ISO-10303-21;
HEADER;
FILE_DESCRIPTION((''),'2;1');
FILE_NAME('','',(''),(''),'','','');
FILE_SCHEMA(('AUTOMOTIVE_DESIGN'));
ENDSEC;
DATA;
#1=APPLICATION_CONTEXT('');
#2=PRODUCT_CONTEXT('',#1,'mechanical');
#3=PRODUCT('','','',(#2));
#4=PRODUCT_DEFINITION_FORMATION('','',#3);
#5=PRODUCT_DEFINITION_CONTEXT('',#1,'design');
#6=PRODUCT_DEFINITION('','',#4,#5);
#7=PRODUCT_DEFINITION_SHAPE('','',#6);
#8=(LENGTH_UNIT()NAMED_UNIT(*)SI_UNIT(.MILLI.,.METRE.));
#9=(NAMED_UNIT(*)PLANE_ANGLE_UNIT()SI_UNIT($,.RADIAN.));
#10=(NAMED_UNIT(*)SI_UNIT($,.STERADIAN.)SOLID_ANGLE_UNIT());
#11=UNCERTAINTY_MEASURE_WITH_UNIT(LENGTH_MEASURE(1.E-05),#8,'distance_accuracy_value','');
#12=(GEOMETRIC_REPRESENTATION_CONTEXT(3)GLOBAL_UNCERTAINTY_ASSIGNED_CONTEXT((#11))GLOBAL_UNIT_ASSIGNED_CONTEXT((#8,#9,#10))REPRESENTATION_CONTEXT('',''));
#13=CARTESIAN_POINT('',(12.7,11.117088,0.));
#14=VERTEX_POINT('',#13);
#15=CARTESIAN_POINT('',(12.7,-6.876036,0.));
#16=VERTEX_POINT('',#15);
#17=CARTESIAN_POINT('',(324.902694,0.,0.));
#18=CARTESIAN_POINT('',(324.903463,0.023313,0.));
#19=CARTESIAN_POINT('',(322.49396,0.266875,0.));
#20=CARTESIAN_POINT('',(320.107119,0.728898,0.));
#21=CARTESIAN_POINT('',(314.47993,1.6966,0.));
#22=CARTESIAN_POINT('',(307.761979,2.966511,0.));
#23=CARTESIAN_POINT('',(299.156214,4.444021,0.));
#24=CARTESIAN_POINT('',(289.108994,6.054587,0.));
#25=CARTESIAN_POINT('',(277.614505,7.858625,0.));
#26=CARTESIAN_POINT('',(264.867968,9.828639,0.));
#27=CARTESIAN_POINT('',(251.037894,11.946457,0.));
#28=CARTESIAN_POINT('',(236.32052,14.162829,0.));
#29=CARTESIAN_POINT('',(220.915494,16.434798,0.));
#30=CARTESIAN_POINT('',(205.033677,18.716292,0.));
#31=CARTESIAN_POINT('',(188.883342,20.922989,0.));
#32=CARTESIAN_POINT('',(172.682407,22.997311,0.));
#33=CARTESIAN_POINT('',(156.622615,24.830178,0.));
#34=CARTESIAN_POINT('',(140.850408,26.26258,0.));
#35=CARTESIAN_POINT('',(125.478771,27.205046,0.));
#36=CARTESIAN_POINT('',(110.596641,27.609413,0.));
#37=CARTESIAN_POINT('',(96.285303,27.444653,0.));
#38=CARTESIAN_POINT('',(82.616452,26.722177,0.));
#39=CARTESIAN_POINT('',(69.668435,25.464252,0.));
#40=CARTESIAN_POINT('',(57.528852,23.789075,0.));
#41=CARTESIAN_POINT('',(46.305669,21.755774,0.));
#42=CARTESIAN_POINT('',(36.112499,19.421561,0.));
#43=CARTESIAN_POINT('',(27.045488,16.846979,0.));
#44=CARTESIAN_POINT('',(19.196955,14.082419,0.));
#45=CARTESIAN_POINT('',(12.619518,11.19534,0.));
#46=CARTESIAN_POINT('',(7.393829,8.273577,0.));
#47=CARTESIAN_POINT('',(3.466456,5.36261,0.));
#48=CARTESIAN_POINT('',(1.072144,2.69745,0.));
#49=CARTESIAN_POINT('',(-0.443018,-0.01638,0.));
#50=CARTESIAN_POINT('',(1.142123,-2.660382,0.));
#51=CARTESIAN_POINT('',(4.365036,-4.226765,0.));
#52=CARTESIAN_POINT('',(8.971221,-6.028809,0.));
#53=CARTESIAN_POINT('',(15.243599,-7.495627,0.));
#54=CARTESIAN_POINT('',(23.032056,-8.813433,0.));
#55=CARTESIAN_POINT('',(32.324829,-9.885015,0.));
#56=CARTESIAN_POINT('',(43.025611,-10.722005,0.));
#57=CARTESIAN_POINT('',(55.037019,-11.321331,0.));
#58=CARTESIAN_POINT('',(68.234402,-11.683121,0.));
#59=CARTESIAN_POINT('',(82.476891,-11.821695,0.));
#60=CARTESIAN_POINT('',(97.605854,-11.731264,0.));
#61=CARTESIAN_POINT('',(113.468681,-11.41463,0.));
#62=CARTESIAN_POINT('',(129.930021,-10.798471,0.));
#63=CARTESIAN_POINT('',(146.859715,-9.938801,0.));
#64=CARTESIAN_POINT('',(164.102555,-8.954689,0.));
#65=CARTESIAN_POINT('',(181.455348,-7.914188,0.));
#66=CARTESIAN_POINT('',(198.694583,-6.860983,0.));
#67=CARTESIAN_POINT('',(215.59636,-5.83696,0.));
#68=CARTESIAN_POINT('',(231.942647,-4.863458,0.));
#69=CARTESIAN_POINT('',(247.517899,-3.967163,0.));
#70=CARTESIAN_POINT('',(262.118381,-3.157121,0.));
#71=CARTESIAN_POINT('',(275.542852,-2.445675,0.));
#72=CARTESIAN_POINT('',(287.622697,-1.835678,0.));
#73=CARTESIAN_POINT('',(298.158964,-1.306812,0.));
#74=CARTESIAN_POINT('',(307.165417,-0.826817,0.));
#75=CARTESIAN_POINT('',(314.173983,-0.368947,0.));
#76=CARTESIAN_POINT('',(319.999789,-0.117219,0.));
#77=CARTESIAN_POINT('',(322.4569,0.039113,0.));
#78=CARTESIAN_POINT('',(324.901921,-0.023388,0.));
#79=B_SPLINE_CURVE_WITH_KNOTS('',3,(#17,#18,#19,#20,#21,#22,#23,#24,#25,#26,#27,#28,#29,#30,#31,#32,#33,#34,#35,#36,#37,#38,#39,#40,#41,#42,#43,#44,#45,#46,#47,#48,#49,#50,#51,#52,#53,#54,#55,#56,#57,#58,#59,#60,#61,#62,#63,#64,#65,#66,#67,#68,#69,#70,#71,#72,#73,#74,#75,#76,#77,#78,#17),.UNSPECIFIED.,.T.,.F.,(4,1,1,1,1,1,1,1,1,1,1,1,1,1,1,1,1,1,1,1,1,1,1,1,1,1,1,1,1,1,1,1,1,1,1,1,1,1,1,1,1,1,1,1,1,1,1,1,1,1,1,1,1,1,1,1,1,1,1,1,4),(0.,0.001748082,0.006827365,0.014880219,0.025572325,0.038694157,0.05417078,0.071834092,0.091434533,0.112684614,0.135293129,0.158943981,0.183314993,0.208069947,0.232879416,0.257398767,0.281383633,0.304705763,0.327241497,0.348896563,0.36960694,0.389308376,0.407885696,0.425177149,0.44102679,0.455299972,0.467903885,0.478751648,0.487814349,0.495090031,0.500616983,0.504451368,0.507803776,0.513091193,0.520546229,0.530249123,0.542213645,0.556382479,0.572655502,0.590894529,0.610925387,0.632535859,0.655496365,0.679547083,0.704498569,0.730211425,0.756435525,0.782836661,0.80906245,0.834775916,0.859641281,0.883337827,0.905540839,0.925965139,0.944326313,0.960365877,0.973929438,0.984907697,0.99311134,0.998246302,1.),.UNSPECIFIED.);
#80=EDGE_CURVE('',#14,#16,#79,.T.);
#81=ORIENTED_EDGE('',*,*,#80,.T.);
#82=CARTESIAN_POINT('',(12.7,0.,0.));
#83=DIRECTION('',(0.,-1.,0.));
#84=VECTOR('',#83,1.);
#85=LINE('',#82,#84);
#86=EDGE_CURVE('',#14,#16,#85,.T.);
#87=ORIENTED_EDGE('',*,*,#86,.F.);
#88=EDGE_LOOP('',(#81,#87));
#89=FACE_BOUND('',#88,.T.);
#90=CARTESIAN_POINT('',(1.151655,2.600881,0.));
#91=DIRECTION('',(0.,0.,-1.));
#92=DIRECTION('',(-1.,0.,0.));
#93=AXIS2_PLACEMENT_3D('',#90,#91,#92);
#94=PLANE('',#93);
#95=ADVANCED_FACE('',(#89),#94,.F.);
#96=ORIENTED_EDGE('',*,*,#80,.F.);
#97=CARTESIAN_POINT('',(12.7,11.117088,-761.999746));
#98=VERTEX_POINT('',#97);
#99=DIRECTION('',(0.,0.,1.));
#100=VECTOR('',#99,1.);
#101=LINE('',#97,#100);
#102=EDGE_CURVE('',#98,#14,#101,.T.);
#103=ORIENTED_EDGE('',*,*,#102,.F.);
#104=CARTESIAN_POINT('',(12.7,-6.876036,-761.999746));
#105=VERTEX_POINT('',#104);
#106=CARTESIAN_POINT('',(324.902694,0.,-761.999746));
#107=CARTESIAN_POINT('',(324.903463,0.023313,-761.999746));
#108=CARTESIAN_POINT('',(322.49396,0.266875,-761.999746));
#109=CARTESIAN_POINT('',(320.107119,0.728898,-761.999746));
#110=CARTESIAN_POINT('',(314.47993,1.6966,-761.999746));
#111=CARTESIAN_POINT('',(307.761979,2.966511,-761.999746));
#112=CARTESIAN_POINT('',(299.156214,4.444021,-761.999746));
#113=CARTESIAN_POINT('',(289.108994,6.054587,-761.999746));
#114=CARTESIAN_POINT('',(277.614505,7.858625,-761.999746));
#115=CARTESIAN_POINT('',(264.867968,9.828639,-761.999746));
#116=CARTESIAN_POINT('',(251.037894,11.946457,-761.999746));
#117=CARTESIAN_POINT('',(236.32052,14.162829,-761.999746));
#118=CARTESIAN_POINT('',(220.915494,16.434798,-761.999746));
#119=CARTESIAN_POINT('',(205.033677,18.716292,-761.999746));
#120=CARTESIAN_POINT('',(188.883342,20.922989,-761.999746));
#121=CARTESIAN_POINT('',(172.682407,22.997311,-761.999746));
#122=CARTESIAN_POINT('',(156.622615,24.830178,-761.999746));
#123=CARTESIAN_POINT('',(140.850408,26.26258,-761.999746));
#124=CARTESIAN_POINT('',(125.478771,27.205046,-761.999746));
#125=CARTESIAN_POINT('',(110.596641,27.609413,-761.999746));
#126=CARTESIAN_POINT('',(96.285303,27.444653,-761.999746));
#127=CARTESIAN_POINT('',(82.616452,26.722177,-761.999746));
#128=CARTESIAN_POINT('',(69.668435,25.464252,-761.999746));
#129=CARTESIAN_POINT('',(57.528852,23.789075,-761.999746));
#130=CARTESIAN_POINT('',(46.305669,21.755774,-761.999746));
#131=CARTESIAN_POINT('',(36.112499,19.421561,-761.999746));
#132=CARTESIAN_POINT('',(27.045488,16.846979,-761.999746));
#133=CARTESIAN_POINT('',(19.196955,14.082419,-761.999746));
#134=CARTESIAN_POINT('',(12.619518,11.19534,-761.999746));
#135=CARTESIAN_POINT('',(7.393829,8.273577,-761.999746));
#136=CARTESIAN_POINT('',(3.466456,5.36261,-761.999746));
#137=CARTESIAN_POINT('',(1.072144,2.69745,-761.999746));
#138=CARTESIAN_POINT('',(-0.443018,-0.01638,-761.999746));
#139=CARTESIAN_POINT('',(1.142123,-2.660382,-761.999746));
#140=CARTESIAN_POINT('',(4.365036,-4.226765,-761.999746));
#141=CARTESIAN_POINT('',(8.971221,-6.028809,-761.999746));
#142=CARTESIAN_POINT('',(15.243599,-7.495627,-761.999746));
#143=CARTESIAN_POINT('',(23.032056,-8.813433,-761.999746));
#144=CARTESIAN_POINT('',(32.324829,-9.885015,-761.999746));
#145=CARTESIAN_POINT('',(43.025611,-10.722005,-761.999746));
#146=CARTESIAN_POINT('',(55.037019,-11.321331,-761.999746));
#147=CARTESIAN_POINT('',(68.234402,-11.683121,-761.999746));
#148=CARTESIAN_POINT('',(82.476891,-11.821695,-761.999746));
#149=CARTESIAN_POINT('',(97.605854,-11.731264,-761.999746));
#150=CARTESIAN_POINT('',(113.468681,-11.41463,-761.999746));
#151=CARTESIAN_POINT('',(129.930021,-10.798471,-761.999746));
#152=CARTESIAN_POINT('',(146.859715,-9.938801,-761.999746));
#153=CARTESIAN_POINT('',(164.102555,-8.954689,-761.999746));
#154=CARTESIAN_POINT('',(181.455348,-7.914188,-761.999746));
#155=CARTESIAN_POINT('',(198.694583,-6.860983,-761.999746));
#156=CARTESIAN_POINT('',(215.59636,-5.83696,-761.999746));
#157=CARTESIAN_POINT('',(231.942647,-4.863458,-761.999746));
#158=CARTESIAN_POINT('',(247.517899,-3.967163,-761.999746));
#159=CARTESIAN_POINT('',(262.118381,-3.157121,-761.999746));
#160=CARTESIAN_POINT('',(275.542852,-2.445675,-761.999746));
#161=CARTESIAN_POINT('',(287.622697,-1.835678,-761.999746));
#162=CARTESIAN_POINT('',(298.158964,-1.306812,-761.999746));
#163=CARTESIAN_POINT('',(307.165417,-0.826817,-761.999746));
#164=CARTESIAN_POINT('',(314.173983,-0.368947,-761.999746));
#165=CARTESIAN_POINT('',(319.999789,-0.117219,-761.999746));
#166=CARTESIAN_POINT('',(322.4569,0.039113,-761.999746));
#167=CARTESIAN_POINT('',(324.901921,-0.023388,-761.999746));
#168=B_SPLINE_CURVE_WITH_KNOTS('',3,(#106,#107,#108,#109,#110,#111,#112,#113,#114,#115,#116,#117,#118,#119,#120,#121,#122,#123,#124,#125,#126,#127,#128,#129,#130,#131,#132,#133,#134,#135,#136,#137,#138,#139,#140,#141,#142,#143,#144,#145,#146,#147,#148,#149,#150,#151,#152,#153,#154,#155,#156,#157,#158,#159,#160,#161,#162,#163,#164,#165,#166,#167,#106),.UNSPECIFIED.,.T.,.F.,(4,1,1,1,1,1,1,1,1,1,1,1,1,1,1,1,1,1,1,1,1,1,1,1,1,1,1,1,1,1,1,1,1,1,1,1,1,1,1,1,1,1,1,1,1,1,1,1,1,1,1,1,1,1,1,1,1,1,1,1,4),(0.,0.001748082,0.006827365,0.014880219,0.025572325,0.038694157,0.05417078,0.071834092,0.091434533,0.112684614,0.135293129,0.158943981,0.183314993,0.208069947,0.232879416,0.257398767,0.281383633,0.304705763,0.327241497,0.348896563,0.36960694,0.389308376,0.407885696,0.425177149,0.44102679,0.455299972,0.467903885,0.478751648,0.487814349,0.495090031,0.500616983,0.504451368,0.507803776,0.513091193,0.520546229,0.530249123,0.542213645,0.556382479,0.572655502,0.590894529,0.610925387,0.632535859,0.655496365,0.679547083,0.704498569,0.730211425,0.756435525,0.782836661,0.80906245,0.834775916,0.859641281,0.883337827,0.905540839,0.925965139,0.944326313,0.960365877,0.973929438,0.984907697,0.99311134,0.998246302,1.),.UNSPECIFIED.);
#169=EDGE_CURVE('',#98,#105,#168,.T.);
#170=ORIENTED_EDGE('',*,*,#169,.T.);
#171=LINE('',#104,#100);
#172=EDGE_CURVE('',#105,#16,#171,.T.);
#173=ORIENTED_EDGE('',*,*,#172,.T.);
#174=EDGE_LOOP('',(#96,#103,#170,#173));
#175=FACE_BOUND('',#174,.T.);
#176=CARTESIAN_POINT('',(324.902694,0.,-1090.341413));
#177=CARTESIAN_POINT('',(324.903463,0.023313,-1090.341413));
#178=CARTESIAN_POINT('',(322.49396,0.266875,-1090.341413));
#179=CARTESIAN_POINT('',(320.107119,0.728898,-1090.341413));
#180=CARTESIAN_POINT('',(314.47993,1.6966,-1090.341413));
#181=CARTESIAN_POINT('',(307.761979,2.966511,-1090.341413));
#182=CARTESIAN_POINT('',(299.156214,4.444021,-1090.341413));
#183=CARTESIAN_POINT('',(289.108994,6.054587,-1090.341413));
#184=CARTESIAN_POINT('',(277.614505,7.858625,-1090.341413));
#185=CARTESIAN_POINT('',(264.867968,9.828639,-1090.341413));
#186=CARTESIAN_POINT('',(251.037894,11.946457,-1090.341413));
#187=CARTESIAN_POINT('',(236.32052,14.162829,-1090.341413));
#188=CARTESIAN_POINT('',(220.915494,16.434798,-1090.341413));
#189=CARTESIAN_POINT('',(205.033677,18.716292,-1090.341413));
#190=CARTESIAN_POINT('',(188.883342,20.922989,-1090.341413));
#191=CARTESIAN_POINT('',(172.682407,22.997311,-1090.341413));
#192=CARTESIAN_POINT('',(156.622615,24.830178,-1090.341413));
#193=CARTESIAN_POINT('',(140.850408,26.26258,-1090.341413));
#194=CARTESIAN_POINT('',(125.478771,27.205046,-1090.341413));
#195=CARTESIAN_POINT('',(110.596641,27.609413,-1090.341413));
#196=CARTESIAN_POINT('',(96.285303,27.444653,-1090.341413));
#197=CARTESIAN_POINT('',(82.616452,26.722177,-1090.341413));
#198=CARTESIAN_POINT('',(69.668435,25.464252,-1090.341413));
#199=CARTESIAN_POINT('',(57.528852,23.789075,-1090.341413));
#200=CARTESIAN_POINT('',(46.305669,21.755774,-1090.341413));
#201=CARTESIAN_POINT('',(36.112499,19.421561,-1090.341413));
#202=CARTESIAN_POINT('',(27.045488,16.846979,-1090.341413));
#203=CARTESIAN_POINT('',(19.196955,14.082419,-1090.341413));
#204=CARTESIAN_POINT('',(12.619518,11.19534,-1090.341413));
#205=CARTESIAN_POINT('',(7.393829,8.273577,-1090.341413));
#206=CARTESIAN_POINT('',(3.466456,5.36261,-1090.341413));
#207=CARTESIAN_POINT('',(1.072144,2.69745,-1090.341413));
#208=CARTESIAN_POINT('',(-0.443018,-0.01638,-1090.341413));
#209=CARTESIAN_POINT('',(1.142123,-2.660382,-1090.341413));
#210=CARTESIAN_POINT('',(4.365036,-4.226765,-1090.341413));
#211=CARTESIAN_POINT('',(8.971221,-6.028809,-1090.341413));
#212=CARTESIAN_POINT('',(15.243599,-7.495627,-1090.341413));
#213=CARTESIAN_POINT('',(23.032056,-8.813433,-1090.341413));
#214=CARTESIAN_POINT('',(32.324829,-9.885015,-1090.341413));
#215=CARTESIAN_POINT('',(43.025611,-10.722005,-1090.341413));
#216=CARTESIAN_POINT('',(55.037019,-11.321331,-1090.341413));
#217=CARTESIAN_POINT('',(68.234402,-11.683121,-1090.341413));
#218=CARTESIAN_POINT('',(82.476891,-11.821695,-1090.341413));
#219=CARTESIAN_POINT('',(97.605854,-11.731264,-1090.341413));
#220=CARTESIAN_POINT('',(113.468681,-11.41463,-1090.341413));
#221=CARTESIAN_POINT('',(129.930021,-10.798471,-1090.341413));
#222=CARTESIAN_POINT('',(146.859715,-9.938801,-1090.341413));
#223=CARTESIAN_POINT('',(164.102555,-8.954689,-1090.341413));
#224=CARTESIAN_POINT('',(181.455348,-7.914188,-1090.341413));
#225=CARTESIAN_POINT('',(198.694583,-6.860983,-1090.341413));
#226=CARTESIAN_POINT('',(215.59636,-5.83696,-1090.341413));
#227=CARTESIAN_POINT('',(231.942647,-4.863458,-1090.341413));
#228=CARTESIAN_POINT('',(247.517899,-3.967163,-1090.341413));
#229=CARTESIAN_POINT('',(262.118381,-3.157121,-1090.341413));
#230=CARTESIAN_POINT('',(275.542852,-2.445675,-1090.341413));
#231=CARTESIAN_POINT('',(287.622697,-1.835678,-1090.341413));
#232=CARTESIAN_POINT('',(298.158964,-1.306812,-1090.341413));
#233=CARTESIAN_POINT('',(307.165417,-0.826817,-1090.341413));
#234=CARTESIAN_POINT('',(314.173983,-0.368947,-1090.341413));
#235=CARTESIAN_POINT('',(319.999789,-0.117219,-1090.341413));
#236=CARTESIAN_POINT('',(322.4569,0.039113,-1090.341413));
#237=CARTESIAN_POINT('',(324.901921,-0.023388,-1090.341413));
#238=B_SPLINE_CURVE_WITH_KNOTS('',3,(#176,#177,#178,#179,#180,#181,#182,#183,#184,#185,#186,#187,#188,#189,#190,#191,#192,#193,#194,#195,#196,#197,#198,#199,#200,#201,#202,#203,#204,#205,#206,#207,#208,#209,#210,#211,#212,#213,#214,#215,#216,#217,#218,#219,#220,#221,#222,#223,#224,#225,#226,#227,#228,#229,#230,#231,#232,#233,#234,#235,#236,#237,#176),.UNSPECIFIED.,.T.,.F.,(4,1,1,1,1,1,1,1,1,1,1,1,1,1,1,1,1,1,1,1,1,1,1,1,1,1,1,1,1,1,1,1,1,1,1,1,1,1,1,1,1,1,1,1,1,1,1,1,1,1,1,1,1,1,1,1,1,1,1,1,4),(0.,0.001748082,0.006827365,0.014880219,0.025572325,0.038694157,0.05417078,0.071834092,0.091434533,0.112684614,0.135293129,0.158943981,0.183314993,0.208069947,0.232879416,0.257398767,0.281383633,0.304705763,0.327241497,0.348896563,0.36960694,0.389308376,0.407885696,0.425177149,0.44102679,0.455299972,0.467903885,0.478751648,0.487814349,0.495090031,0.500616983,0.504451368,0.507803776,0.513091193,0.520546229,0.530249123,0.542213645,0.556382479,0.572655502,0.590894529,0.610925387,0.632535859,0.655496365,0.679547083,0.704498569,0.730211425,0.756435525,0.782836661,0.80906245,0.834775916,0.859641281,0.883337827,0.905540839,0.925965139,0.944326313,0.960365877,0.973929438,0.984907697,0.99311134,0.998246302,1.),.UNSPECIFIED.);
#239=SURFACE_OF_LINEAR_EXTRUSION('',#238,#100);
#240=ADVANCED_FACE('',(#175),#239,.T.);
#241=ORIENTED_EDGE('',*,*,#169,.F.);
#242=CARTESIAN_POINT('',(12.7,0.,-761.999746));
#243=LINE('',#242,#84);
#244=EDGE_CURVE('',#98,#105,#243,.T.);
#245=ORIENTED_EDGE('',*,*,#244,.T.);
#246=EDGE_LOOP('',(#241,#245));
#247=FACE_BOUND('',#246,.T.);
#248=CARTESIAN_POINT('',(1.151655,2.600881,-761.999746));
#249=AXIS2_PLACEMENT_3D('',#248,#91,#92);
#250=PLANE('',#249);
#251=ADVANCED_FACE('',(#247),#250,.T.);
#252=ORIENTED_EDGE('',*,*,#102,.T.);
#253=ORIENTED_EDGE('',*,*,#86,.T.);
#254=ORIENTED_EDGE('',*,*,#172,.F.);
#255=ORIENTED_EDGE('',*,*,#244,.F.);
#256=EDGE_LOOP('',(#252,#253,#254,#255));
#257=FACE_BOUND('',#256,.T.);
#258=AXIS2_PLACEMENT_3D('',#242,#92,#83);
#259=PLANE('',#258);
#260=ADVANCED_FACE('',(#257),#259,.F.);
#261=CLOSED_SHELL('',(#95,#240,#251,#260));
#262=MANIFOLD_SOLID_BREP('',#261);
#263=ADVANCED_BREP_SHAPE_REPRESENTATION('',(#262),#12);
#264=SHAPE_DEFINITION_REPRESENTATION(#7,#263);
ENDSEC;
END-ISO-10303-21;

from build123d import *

# Parameters (mm, degrees)
BOSS_EXTRUDE2_DEPTH = 761.999746
CUT_EXTRUDE1_START  = -761.999746
CUT_EXTRUDE1_DEPTH  = 761.999746


# Read off the part's stored shape, not the designer's step: Cut-Extrude1
with BuildPart() as part:
    # Sketch2 → Boss-Extrude2 (new body)
    with BuildSketch(Plane.XY):
        with BuildLine():
            add(Edge.make_bspline(
                [(324.902693551, 0), (324.903463196, 0.023313358), (322.493960125, 0.266874853), (320.107118726, 0.728898482), (314.479929879, 1.696599545), (307.761979309, 2.966510847), (299.156213966, 4.44402059), (289.108994082, 6.054587212), (277.614504557, 7.858625418), (264.867967682, 9.828639283), (251.037893607, 11.946456865), (236.320520328, 14.162828682), (220.915494029, 16.434797842), (205.033677241, 18.716292105), (188.883341887, 20.922988597), (172.682407247, 22.997310524), (156.622614565, 24.830178487), (140.850407651, 26.262579625), (125.478771128, 27.205045845), (110.596641232, 27.609413226), (96.285303339, 27.444653165), (82.616452357, 26.722177249), (69.668434964, 25.464252485), (57.528852266, 23.789075325), (46.305668853, 21.755773795), (36.112498821, 19.421560607), (27.045487678, 16.846978605), (19.196955025, 14.082419467), (12.619518254, 11.195340149), (7.393829249, 8.273577005), (3.466455599, 5.362609604), (1.07214418, 2.697450283), (-0.443018312, -0.016380309), (1.142123289, -2.660381571), (4.36503606, -4.226764571), (8.971221404, -6.028809419), (15.243598774, -7.49562747), (23.03205608, -8.813433078), (32.324829104, -9.885015211), (43.025610851, -10.722004925), (55.037019029, -11.32133074), (68.234402161, -11.683120574), (82.476890937, -11.821694636), (97.60585357, -11.731263556), (113.468681032, -11.414630367), (129.930020513, -10.79847052), (146.859715047, -9.938801137), (164.102555428, -8.954688629), (181.455347718, -7.914187903), (198.694582839, -6.86098311), (215.596359861, -5.836960409), (231.942646987, -4.863457625), (247.517899408, -3.967162621), (262.118380872, -3.157120583), (275.542852028, -2.445675428), (287.622696903, -1.835678138), (298.158964313, -1.306811978), (307.16541669, -0.826816664), (314.173983408, -0.368946975), (319.99978897, -0.117218531), (322.45689994, 0.039112512), (324.901921434, -0.023388259), (324.902693551, 0)],
                knots=[0, 0, 0, 0, 0.001748082, 0.006827365, 0.014880219, 0.025572325, 0.038694157, 0.05417078, 0.071834092, 0.091434533, 0.112684614, 0.135293129, 0.158943981, 0.183314993, 0.208069947, 0.232879416, 0.257398767, 0.281383633, 0.304705763, 0.327241497, 0.348896563, 0.36960694, 0.389308376, 0.407885696, 0.425177149, 0.44102679, 0.455299972, 0.467903885, 0.478751648, 0.487814349, 0.495090031, 0.500616983, 0.504451368, 0.507803776, 0.513091193, 0.520546229, 0.530249123, 0.542213645, 0.556382479, 0.572655502, 0.590894529, 0.610925387, 0.632535859, 0.655496365, 0.679547083, 0.704498569, 0.730211425, 0.756435525, 0.782836661, 0.80906245, 0.834775916, 0.859641281, 0.883337827, 0.905540839, 0.925965139, 0.944326313, 0.960365877, 0.973929438, 0.984907697, 0.99311134, 0.998246302, 1, 1, 1, 1], degree=3))
        make_face()
    extrude(amount=-BOSS_EXTRUDE2_DEPTH)

    # Cut-Extrude1 outline → Cut-Extrude1 (cut)
    with BuildSketch(Plane.XY.offset(CUT_EXTRUDE1_START)):
        with BuildLine():
            add(Edge.make_bspline(
                [(324.902693551, 0), (324.903463196, 0.023313358), (322.493960125, 0.266874853), (320.107118726, 0.728898482), (314.479929879, 1.696599545), (307.761979309, 2.966510847), (299.156213966, 4.44402059), (289.108994082, 6.054587212), (277.614504557, 7.858625418), (264.867967682, 9.828639283), (251.037893607, 11.946456865), (236.320520328, 14.162828682), (220.915494029, 16.434797842), (205.033677241, 18.716292105), (188.883341887, 20.922988597), (172.682407247, 22.997310524), (156.622614565, 24.830178487), (140.850407651, 26.262579625), (125.478771128, 27.205045845), (110.596641232, 27.609413226), (96.285303339, 27.444653165), (82.616452357, 26.722177249), (69.668434964, 25.464252485), (57.528852266, 23.789075325), (46.305668853, 21.755773795), (36.112498821, 19.421560607), (27.045487678, 16.846978605), (19.3313577, 14.129761328), (14.714314762, 12.114502523), (12.7, 11.117087729)],
                knots=[0, 0, 0, 0, 0.001748082, 0.006827365, 0.014880219, 0.025572325, 0.038694157, 0.05417078, 0.071834092, 0.091434533, 0.112684614, 0.135293129, 0.158943981, 0.183314993, 0.208069947, 0.232879416, 0.257398767, 0.281383633, 0.304705763, 0.327241497, 0.348896563, 0.36960694, 0.389308376, 0.407885696, 0.425177149, 0.44102679, 0.455299972, 0.467903885, 0.478105627, 0.478105627, 0.478105627, 0.478105627], degree=3))
            Line((12.7, 11.117087729), (12.7, -6.876035615))
            add(Edge.make_bspline(
                [(12.7, -6.876035615), (13.386291094, -7.033779246), (16.659123202, -7.735133954), (23.03205608, -8.813433078), (32.324829104, -9.885015211), (43.025610851, -10.722004925), (55.037019029, -11.32133074), (68.234402161, -11.683120574), (82.476890937, -11.821694636), (97.60585357, -11.731263556), (113.468681032, -11.414630367), (129.930020513, -10.79847052), (146.859715047, -9.938801137), (164.102555428, -8.954688629), (181.455347718, -7.914187903), (198.694582839, -6.86098311), (215.596359861, -5.836960409), (231.942646987, -4.863457625), (247.517899408, -3.967162621), (262.118380872, -3.157120583), (275.542852028, -2.445675428), (287.622696903, -1.835678138), (298.158964313, -1.306811978), (307.16541669, -0.826816664), (314.173983408, -0.368946975), (319.99978897, -0.117218531), (322.45689994, 0.039112512), (324.901921434, -0.023388259), (324.902693551, 0)],
                knots=[0.52705934, 0.52705934, 0.52705934, 0.52705934, 0.530249123, 0.542213645, 0.556382479, 0.572655502, 0.590894529, 0.610925387, 0.632535859, 0.655496365, 0.679547083, 0.704498569, 0.730211425, 0.756435525, 0.782836661, 0.80906245, 0.834775916, 0.859641281, 0.883337827, 0.905540839, 0.925965139, 0.944326313, 0.960365877, 0.973929438, 0.984907697, 0.99311134, 0.998246302, 1, 1, 1, 1], degree=3))
        make_face()
    extrude(amount=CUT_EXTRUDE1_DEPTH, mode=Mode.SUBTRACT)


solid = part.part
